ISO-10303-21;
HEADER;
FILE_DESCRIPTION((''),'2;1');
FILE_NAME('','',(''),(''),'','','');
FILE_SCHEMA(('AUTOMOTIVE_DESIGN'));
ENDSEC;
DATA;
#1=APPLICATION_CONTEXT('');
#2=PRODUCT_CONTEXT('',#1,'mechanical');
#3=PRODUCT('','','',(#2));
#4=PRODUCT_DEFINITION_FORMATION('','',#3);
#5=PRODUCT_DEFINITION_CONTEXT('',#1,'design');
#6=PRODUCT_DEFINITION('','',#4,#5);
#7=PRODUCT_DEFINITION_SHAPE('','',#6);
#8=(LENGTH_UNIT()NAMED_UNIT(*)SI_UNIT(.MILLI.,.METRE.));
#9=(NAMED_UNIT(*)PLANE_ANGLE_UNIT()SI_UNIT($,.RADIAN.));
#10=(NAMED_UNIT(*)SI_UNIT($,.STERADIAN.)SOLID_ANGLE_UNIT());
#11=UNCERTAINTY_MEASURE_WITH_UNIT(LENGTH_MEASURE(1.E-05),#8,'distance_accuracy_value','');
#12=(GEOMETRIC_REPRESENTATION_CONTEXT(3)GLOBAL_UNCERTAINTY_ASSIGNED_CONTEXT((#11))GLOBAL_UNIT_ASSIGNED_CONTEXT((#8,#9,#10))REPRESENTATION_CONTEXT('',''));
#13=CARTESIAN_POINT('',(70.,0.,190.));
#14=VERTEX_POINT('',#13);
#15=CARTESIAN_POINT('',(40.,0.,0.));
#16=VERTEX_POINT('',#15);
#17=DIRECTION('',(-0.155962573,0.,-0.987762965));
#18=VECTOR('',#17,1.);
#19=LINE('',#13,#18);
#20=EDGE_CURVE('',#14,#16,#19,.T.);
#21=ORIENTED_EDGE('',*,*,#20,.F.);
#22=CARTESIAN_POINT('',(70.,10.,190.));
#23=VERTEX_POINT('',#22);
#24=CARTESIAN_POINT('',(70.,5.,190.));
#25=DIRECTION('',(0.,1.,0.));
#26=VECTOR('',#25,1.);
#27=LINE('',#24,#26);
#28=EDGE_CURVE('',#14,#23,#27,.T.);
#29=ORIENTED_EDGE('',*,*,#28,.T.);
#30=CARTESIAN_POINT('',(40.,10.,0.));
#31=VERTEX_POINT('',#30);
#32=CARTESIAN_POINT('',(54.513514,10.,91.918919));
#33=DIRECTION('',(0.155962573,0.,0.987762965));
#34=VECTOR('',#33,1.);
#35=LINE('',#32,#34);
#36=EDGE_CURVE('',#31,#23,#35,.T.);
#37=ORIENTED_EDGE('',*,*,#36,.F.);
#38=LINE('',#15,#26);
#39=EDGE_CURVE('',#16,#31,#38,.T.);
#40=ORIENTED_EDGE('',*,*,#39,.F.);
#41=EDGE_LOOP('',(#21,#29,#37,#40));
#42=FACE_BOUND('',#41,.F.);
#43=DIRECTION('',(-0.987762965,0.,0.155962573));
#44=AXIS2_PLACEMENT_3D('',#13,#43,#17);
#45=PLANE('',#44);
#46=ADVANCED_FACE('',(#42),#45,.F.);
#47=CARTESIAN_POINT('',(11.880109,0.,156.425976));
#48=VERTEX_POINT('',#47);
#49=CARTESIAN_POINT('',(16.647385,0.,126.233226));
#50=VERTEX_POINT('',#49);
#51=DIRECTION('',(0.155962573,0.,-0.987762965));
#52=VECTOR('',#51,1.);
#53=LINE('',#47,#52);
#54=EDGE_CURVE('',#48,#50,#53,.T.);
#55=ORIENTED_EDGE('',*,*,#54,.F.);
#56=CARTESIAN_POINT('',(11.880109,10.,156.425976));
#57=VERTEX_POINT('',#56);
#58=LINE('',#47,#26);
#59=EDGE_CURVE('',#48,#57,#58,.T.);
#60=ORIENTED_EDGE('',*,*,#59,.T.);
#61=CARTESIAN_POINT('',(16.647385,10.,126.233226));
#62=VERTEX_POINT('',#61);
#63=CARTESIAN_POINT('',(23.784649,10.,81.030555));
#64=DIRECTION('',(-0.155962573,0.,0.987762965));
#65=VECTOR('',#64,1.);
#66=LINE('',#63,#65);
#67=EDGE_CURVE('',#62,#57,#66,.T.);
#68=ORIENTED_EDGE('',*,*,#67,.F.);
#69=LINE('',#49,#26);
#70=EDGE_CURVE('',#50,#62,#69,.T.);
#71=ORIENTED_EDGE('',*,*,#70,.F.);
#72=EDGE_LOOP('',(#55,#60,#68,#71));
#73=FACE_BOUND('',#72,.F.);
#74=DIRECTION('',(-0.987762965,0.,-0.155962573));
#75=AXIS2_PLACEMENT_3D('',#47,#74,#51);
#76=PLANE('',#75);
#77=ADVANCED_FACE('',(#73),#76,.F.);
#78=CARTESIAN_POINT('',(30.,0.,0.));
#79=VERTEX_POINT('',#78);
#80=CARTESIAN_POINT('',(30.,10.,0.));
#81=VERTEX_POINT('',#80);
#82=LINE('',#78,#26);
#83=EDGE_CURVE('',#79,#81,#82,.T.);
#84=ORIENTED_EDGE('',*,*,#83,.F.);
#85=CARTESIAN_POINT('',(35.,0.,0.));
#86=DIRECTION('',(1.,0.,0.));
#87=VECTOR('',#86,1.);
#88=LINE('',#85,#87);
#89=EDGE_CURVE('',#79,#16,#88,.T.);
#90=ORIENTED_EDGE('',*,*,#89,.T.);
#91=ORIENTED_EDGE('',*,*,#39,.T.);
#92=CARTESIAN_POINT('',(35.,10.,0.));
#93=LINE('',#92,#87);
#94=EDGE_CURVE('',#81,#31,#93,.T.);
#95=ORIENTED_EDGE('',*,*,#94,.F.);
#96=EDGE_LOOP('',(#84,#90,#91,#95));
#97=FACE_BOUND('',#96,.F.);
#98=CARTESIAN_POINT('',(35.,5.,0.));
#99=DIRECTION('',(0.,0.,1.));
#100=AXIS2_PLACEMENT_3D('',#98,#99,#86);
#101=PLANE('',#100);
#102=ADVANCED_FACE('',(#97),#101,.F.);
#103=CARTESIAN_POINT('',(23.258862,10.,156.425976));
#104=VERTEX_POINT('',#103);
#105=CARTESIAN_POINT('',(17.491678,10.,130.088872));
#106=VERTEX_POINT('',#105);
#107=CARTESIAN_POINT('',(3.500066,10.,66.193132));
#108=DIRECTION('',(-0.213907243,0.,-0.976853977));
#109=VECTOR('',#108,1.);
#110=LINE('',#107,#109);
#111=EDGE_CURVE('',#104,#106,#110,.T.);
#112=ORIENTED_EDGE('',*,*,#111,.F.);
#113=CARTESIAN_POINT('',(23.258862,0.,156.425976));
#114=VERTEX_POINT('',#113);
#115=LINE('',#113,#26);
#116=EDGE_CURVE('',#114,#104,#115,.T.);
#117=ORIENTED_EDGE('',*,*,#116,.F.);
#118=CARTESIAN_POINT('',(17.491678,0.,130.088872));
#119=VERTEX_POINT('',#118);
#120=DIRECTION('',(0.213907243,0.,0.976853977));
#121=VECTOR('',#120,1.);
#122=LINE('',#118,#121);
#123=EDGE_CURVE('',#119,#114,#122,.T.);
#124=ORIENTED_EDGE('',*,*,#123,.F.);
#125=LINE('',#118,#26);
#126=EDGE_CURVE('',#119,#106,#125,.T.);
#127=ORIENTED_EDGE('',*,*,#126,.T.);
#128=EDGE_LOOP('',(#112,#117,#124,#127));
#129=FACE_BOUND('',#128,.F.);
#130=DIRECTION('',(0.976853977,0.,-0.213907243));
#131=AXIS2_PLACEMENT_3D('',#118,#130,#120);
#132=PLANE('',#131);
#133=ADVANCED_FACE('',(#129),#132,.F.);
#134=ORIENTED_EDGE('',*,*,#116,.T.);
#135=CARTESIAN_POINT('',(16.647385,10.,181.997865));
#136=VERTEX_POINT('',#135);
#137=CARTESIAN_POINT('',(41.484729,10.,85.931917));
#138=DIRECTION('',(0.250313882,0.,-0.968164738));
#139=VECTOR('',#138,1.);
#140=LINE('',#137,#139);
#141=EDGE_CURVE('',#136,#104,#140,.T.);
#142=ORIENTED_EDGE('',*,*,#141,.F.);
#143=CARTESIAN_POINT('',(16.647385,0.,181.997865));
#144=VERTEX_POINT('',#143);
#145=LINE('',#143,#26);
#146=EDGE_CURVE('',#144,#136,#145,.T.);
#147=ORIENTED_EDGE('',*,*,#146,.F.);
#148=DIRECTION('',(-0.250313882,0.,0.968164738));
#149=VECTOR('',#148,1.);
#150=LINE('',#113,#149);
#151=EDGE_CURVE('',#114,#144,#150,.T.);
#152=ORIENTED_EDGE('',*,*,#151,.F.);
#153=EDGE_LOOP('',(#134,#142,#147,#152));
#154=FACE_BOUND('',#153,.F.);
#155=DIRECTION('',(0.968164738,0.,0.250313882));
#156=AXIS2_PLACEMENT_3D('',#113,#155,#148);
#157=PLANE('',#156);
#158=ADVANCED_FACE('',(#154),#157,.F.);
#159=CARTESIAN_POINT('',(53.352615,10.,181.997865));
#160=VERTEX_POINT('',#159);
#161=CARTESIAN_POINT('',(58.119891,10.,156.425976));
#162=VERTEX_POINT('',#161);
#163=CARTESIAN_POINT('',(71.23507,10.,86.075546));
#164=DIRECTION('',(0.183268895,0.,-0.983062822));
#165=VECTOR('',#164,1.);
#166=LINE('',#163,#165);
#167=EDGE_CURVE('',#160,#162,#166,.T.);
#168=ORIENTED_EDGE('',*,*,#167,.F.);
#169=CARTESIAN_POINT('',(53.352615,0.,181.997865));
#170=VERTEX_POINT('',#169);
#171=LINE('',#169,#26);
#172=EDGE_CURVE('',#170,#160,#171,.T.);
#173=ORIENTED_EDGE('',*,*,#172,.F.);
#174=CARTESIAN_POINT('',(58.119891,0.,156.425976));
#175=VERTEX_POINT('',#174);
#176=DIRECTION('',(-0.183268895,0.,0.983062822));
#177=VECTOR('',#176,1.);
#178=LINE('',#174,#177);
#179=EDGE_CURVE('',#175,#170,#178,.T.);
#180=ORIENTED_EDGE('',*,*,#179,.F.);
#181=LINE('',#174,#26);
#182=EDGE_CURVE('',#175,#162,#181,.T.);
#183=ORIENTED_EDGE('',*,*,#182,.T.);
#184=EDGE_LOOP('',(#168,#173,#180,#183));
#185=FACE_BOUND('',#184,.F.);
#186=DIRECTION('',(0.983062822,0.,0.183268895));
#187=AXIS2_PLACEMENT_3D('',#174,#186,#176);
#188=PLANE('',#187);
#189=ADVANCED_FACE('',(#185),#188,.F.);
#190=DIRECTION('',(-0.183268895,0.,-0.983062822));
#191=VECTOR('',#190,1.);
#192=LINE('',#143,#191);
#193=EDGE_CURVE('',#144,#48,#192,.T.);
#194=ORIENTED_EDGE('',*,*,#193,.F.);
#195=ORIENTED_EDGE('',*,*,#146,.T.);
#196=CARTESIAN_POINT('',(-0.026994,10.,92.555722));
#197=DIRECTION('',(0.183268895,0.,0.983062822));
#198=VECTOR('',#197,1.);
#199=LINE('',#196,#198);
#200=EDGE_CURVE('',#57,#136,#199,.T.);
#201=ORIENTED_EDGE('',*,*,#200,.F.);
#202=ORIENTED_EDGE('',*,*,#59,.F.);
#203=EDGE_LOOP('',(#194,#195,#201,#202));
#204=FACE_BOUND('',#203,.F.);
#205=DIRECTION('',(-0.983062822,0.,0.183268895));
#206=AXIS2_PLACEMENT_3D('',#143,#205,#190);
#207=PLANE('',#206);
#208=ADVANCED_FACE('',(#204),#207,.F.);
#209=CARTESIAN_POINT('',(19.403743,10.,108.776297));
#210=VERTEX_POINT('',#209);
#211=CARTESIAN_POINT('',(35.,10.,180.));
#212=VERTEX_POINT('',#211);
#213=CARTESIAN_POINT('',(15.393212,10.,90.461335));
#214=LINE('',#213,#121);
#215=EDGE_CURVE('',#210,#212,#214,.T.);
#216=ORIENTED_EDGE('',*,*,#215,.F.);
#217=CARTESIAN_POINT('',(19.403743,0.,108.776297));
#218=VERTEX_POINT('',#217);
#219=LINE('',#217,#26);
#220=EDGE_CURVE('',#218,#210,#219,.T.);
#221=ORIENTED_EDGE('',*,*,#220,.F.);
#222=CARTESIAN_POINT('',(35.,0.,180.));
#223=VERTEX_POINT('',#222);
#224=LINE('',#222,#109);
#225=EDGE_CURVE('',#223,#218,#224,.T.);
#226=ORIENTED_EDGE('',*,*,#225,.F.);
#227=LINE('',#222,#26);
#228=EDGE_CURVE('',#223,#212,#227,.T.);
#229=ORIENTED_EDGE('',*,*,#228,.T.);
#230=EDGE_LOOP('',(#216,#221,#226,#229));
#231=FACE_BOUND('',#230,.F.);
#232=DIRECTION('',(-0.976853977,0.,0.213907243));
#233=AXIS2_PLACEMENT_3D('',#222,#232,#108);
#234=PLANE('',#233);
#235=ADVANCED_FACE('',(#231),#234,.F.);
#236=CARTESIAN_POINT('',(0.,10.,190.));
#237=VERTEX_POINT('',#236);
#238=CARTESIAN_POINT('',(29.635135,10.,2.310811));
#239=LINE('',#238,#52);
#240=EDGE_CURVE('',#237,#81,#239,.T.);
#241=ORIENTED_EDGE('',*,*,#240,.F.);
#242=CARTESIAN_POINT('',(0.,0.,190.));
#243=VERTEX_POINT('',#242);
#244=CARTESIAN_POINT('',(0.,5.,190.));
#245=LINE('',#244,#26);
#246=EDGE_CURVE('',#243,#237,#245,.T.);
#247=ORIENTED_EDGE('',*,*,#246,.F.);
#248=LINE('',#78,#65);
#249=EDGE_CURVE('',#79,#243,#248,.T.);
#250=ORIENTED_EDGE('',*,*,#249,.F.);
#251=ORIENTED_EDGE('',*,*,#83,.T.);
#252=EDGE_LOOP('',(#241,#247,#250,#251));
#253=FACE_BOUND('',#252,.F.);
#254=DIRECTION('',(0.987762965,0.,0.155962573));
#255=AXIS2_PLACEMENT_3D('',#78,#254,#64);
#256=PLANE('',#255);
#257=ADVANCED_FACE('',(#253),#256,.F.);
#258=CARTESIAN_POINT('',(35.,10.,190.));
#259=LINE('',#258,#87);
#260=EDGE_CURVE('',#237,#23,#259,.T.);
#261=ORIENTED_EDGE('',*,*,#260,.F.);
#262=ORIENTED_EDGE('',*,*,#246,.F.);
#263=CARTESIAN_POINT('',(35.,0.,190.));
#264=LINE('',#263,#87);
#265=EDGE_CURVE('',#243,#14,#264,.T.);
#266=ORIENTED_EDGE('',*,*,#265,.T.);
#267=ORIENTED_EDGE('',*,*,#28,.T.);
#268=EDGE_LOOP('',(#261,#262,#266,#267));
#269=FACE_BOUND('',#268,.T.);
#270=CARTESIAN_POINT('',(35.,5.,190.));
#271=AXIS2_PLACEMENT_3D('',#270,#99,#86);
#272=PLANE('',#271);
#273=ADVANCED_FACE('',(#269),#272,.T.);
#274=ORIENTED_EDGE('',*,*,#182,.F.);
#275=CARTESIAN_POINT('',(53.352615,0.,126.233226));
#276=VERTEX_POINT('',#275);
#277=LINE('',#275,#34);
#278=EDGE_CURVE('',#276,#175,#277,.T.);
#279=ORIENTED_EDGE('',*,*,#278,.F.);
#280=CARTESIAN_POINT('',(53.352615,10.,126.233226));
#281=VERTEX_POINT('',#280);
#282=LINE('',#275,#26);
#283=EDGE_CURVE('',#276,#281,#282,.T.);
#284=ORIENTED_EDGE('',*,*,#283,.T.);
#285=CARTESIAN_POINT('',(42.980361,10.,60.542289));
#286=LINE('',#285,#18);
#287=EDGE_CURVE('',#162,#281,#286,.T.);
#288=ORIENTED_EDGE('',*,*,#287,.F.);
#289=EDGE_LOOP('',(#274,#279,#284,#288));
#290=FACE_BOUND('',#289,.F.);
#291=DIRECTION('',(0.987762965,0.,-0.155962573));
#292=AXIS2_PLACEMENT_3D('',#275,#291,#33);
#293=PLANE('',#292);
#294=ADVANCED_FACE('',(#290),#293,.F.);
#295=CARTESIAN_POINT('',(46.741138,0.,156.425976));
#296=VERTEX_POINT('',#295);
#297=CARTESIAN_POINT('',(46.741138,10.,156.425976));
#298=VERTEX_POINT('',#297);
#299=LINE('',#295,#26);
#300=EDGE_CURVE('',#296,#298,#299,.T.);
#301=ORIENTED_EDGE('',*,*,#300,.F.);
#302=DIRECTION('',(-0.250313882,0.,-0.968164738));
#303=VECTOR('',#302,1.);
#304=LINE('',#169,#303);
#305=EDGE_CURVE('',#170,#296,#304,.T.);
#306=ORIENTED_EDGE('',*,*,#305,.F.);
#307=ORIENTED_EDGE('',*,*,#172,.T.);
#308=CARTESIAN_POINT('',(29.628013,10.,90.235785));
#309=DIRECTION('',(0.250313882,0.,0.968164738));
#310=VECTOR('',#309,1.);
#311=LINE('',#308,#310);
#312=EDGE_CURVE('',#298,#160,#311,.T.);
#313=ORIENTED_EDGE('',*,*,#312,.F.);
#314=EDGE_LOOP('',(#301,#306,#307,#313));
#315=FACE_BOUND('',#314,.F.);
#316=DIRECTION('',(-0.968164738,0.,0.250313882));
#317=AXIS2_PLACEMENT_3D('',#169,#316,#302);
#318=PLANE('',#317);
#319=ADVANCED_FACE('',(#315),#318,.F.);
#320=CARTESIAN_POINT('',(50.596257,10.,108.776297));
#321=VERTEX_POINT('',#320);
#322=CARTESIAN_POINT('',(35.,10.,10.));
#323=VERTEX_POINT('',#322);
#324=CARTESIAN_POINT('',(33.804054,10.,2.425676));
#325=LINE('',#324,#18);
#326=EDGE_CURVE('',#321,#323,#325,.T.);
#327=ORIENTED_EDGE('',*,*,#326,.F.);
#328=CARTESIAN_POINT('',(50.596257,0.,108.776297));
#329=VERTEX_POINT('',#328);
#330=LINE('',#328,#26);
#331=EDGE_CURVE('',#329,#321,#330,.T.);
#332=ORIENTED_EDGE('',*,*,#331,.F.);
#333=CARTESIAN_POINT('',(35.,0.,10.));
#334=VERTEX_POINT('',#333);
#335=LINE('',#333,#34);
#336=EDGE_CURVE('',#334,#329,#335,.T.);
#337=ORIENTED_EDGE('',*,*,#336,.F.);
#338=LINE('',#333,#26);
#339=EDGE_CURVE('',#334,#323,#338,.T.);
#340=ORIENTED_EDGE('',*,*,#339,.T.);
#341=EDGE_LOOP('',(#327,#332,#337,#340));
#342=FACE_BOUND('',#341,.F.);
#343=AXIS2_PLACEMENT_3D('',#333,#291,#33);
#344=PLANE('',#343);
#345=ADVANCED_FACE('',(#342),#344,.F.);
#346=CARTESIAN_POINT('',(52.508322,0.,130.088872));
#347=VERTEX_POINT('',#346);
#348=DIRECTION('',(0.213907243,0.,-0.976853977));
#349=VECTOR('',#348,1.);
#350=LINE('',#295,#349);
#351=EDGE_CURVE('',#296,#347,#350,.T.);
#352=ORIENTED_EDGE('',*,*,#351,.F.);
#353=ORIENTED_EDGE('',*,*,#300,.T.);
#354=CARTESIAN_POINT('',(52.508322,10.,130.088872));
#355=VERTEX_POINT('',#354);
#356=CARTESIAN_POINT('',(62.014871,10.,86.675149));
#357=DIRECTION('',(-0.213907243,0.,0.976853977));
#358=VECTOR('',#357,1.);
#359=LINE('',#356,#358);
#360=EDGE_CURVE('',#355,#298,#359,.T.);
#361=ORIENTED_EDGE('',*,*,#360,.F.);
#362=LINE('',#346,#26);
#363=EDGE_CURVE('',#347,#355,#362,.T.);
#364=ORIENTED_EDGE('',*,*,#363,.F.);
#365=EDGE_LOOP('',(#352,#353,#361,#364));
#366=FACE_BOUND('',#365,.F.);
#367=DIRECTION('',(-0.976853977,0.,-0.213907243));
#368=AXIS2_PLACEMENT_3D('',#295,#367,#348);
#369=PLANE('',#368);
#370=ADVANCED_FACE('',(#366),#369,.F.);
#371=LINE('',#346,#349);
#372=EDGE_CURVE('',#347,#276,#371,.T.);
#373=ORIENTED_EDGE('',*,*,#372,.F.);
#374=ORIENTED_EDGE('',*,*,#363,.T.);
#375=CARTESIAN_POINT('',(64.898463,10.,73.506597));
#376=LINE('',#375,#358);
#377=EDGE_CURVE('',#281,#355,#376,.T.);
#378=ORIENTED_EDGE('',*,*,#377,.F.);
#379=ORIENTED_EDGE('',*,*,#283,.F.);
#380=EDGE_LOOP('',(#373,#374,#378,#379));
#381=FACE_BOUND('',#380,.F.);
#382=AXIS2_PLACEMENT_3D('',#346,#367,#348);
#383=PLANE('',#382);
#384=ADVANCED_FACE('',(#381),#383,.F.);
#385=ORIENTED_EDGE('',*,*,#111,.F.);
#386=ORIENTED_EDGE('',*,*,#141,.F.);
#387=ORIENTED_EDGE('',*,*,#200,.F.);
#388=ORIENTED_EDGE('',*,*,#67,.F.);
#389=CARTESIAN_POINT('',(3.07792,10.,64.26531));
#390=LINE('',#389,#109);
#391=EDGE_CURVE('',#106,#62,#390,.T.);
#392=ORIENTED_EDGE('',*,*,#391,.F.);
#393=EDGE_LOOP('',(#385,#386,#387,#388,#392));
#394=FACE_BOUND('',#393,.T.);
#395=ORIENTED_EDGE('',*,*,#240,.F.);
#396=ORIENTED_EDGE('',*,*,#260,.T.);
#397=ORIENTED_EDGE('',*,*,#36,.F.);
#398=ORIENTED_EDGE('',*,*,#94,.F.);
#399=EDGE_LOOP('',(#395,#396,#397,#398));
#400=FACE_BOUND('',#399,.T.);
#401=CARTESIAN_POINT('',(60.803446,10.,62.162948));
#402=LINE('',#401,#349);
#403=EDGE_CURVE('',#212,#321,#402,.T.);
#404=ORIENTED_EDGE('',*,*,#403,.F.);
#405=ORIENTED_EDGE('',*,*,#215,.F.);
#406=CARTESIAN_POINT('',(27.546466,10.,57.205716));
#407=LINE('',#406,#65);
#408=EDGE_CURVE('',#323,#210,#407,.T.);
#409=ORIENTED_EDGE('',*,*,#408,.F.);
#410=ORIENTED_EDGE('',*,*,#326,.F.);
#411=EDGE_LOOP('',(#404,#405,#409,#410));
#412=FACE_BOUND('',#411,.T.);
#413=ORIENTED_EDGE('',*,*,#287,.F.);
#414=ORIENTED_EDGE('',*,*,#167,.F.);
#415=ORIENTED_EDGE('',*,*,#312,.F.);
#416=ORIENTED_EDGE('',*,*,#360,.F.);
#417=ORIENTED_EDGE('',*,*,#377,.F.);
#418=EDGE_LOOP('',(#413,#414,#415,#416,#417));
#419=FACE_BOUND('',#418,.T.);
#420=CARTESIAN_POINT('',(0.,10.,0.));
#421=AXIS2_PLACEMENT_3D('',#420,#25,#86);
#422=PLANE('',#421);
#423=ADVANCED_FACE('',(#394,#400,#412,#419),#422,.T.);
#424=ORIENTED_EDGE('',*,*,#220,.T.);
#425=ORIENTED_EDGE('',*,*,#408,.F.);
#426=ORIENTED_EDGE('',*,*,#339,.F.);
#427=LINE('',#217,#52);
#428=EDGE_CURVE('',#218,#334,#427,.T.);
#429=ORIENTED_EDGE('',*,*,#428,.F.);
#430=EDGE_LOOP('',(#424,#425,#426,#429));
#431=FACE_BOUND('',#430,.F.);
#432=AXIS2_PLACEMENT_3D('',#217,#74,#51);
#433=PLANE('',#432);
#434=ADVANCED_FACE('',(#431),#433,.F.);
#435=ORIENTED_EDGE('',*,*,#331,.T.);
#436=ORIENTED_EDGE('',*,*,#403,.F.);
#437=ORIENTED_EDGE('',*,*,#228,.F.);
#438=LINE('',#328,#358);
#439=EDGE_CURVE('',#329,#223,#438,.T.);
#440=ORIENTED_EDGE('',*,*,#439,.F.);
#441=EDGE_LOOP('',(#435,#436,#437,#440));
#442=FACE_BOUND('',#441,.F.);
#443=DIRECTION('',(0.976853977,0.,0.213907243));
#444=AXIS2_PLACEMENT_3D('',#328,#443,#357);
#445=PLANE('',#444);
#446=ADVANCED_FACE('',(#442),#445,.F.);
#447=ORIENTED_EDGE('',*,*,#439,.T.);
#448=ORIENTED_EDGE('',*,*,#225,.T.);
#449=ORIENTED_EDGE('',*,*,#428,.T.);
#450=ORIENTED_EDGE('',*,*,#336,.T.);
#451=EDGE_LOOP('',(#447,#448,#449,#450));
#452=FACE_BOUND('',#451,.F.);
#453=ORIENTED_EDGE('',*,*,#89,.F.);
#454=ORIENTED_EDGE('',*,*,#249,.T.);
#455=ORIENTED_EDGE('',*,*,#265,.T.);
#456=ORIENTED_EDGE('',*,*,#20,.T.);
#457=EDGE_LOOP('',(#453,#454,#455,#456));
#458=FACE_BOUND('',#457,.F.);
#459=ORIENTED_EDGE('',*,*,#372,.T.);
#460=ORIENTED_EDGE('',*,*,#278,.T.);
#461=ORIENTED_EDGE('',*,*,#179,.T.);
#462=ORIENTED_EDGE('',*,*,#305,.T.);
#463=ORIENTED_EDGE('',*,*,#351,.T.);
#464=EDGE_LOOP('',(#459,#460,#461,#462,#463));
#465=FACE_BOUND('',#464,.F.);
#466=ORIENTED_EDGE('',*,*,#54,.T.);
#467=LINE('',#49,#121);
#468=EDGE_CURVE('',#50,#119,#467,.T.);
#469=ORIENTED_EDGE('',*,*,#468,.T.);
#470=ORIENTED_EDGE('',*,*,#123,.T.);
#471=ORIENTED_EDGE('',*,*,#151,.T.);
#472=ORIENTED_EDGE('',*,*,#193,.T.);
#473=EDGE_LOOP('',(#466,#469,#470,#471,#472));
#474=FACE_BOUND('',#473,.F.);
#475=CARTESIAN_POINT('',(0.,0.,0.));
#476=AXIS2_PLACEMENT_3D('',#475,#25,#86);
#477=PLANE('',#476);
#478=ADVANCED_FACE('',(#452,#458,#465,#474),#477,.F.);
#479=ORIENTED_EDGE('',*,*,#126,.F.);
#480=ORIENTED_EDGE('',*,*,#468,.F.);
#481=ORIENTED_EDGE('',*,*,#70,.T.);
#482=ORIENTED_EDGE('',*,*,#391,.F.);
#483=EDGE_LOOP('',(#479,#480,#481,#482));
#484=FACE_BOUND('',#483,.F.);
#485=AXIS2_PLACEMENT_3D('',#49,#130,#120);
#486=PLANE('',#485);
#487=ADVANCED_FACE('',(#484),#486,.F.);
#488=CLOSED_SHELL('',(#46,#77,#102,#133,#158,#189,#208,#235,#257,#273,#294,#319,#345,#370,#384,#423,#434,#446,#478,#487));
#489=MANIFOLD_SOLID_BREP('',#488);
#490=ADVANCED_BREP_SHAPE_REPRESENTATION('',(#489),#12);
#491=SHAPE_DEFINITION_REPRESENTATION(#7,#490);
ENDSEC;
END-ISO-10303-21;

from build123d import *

# Parameters (mm, degrees)
F0_W      = 80
F0_H      = 16
F1_DEPTH  = 160
F3_DEPTH  = 25
F5_DEPTH  = 25
F7_W      = 70
F7_H      = 10
F8_DEPTH  = 190
F10_DEPTH = 25
F12_DEPTH = 25
F14_DEPTH = 25
F16_DEPTH = 25


with BuildPart() as f1:
    # F0 (on Top) → F1 (new body)
    with BuildSketch(Plane.XY):
        with Locations((40, 8)):
            Rectangle(F0_W, F0_H)
    extrude(amount=F1_DEPTH)

    # F2 (on face) → F3 (cut)
    with BuildSketch(Plane.XZ):
        Polygon((0, 160), (0, 0), (32.5, 0), align=None)
    extrude(amount=-F3_DEPTH, mode=Mode.SUBTRACT)

    # F4 (on face) → F5 (cut)
    with BuildSketch(Plane.XZ):
        Polygon((47.5, 0), (80, 0), (80, 160), align=None)
    extrude(amount=-F5_DEPTH, mode=Mode.SUBTRACT)


with BuildPart() as f8:
    # F7 (on Top) → F8 (new body)
    with BuildSketch(Plane.XY):
        with Locations((35, 5)):
            Rectangle(F7_W, F7_H)
    extrude(amount=F8_DEPTH)

    # F9 (on face) → F10 (cut)
    with BuildSketch(Plane.XZ):
        Polygon((0, 190), (0, 0), (30, 0), align=None)
    extrude(amount=-F10_DEPTH, mode=Mode.SUBTRACT)

    # F11 (on face) → F12 (cut)
    with BuildSketch(Plane.XZ):
        Polygon((40, 0), (70, 0), (70, 190), align=None)
    extrude(amount=-F12_DEPTH, mode=Mode.SUBTRACT)

    # F13 (on face) → F14 (cut)
    with BuildSketch(Plane.XZ):
        Polygon((19.4037426527, 108.7762965329), (35, 10), (50.5962573473, 108.7762965329), (35, 180), align=None)
    extrude(amount=-F14_DEPTH, mode=Mode.SUBTRACT)

    # F15 (on face) → F16 (cut)
    with BuildSketch(Plane.XZ):
        Polygon((11.8801091279, 156.4259755233), (16.6473853285, 126.2332262527), (17.4916778251, 130.0888716859), (23.2588624734, 156.4259755233), (16.6473853285, 181.9978654385), align=None)
        Polygon((58.1198908721, 156.4259755233), (53.3526146715, 181.9978654385), (46.7411375266, 156.4259755233), (52.5083221749, 130.0888716859), (53.3526146715, 126.2332262527), align=None)
    extrude(amount=-F16_DEPTH, mode=Mode.SUBTRACT)


solid = f8.part
